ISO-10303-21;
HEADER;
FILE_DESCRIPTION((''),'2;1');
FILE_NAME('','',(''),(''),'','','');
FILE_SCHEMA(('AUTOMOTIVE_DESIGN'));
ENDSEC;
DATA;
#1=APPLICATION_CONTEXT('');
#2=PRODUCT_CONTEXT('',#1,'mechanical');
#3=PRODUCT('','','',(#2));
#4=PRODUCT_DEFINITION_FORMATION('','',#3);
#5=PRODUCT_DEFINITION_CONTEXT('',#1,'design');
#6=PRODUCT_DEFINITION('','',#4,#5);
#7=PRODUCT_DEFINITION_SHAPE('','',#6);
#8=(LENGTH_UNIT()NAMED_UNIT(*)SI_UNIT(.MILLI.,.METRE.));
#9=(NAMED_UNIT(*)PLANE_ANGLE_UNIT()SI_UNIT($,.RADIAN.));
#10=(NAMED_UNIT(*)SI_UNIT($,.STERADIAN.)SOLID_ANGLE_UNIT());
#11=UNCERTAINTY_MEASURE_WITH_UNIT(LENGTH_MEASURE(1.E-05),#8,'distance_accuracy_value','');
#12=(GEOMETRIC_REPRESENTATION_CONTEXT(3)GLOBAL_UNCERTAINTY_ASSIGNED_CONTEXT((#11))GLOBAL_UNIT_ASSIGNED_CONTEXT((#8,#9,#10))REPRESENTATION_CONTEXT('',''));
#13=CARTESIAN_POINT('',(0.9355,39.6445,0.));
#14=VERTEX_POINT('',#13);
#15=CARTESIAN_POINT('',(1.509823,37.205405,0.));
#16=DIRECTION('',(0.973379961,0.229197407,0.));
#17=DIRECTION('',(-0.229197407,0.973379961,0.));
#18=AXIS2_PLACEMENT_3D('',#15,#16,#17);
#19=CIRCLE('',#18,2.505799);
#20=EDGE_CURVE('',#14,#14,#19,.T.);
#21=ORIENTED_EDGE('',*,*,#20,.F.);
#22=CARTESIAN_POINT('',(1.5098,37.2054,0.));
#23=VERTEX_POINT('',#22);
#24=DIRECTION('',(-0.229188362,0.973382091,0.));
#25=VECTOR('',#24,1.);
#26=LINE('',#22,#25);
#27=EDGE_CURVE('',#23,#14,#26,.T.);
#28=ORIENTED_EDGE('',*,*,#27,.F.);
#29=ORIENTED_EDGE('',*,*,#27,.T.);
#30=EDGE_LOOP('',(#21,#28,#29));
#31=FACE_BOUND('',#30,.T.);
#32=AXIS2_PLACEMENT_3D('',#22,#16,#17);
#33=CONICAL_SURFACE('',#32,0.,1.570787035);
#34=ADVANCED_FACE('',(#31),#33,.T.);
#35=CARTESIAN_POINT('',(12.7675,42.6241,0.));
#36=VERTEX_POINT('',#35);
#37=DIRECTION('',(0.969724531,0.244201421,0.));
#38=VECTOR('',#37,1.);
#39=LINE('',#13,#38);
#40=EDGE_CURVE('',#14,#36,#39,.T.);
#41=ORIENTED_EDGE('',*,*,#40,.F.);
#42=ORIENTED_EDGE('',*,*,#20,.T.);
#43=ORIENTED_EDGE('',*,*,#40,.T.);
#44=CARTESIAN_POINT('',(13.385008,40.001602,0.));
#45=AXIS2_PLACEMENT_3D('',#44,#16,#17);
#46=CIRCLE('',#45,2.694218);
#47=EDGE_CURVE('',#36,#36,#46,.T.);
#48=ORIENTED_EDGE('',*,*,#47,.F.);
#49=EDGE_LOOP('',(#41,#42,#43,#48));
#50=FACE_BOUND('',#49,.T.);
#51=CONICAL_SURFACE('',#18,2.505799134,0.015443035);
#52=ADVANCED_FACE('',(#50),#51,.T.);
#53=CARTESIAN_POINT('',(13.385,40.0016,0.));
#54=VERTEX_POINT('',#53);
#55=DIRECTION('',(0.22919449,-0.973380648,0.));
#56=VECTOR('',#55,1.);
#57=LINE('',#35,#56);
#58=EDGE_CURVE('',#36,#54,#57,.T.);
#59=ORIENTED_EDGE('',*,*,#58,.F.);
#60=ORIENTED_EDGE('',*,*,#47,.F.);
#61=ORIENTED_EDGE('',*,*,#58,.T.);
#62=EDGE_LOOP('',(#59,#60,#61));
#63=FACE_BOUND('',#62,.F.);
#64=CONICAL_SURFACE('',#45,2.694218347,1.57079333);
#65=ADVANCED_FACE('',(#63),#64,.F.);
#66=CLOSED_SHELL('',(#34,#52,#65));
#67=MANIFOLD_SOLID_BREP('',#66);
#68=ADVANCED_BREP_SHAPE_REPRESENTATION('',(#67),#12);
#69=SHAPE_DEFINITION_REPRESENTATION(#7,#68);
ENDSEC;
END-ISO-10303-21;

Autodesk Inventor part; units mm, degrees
sketch "Sketch_1" plane through (0, 0, 0) normal (0, 0, 1) x (1, 0, 0)
  line L0 (13.385, 40.0016) -> (1.5098, 37.2054)
  line L1 (1.5098, 37.2054) -> (0.9355, 39.6445)
  line L2 (0.9355, 39.6445) -> (12.7675, 42.6241)
  line L3 (12.7675, 42.6241) -> (13.385, 40.0016)
  line L4 (13.385, 40.0016) -> (1.5098, 37.2054)
revolve "Revolution1" add sketch "Sketch_1" angle 360 about axis through (13.385, 40.0016, 0) along (0.9733793, 0.2292004, 0)
ref_plane "roller_XY" through (0, 38.6035, 0) normal (-1, 0, 0) x (0, 0, -1)
ref_plane "roller_YZ" through (0, 38.6035, 0) normal (0, 0, -1) x (0, -1, 0)
ref_plane "roller_ZX" through (0, 38.6035, 0) normal (0, -1, 0) x (-1, 0, 0)
properties part number "32913_roller"
